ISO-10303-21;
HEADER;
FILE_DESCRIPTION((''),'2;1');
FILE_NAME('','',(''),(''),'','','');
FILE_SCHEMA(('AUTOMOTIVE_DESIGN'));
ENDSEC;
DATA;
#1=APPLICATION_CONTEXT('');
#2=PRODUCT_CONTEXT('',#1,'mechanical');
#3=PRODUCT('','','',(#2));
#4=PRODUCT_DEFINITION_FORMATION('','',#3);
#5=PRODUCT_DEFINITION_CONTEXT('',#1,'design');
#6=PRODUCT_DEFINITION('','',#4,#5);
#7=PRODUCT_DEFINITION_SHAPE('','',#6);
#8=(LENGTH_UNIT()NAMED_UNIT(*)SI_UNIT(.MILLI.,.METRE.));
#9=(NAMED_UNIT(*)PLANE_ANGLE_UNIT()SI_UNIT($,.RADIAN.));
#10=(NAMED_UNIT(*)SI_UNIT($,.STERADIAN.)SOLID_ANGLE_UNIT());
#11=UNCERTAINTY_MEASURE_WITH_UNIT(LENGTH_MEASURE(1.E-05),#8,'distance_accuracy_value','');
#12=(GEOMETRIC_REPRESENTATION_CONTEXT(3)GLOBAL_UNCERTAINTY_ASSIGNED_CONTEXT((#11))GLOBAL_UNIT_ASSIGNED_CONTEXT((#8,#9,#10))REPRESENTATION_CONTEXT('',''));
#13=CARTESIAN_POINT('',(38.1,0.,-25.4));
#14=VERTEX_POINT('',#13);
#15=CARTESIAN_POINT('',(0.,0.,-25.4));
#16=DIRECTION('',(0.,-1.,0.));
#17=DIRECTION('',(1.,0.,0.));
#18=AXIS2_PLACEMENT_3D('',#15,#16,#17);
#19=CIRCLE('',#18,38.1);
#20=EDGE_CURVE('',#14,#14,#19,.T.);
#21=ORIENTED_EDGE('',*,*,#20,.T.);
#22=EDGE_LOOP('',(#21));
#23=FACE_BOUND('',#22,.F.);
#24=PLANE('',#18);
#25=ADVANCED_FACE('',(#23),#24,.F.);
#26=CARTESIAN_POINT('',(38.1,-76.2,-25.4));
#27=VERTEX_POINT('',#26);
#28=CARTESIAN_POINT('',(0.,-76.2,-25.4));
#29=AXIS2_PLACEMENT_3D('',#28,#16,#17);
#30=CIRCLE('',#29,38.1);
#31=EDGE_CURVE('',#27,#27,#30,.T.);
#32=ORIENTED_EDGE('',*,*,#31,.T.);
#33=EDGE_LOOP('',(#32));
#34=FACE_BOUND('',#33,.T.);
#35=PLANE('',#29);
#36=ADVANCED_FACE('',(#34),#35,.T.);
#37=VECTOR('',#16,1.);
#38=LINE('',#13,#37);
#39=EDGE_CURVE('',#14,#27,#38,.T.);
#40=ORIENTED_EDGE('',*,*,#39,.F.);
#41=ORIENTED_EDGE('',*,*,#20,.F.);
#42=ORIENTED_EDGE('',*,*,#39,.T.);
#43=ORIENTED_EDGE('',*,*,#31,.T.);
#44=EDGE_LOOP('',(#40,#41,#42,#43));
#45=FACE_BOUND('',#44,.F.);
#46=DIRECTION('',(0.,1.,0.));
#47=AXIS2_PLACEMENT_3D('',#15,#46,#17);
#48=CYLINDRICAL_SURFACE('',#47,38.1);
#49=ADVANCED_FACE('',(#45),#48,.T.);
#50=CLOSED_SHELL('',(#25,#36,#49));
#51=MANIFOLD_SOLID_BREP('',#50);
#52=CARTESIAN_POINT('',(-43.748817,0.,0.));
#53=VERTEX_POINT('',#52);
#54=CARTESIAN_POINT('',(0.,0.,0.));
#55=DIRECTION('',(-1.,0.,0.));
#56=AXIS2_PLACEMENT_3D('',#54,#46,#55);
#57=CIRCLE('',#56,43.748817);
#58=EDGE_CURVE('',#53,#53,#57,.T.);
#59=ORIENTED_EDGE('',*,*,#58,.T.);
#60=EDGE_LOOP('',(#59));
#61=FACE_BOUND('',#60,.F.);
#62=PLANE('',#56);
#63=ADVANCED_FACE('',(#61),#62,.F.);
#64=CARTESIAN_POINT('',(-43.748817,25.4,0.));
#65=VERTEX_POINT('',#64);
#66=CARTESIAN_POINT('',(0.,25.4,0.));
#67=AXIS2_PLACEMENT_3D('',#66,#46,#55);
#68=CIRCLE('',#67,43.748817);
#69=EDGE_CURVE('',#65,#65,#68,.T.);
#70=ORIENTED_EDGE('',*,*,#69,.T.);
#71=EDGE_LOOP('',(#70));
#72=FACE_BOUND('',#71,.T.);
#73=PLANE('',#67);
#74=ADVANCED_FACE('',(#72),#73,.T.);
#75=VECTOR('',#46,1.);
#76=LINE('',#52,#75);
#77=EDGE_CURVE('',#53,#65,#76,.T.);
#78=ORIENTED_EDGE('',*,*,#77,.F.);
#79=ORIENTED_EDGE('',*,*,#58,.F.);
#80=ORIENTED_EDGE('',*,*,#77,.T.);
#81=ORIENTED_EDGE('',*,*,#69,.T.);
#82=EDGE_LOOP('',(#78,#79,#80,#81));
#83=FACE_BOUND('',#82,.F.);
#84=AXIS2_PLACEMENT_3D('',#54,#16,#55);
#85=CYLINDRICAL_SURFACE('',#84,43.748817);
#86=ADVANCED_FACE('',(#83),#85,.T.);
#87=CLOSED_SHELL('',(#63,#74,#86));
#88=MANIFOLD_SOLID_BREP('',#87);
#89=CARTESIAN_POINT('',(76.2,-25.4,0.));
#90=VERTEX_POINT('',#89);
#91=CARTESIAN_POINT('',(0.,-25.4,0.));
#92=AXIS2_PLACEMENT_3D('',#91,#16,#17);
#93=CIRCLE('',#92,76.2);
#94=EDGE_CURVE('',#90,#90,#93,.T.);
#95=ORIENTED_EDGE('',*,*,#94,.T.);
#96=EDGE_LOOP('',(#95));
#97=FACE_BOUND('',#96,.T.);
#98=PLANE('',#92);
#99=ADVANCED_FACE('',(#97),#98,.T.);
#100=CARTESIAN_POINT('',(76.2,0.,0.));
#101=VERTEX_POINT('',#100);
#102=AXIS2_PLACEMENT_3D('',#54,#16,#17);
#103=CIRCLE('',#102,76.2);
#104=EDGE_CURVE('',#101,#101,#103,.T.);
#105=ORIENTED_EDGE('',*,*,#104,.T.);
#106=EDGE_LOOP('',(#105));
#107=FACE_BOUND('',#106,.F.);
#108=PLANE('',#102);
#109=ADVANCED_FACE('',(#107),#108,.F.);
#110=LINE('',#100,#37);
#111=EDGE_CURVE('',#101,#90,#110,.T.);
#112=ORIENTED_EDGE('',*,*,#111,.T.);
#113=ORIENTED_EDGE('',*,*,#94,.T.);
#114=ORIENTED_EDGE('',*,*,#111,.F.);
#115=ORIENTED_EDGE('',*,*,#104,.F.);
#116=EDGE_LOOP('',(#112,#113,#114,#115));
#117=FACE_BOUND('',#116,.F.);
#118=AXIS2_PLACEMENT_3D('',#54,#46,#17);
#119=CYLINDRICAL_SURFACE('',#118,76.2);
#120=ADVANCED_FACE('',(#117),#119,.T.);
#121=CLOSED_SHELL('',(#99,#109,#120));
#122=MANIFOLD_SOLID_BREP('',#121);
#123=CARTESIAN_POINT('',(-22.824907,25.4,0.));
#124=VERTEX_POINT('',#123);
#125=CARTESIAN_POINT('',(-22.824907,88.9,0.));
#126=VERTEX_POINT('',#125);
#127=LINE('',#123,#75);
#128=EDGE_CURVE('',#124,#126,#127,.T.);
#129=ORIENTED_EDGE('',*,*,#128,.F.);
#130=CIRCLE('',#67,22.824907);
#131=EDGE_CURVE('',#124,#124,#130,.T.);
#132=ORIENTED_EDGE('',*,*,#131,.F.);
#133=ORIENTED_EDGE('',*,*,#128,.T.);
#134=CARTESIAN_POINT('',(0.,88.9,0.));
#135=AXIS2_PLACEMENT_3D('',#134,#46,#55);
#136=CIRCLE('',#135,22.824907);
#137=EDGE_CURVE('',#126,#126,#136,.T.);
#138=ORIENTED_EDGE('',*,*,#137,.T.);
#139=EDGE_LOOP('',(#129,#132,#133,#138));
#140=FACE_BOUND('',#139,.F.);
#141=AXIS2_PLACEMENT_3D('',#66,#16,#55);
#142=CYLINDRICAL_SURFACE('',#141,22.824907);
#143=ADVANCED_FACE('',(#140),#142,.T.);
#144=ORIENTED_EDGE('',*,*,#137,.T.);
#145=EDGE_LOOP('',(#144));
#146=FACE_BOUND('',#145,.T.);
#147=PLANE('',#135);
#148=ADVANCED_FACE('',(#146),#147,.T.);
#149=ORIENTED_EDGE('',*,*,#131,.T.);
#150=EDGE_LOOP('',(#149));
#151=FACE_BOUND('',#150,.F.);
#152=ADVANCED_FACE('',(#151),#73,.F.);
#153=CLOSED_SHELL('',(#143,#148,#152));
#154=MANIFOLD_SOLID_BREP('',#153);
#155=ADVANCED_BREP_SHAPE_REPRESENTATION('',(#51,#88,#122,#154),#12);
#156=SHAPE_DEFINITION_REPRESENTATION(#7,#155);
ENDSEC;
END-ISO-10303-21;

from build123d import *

# Parameters (mm, degrees)
F0_R     = 76.2
F1_DEPTH = 25.4
F2_R     = 38.1
F3_DEPTH = 76.2
F5_R     = 43.7488165657
F6_DEPTH = 25.4
F7_R     = 22.8249074769
F8_DEPTH = 63.5


# Not quite as in the source:
# - the program builds the solid bodies; features that only make, move or delete a surface that nothing else refers to are left out


with BuildPart() as f1:
    # F0 (on Front) → F1 (new body)
    with BuildSketch(Plane.XZ):
        Circle(F0_R)
    extrude(amount=F1_DEPTH)


with BuildPart() as f3:
    # F2 (on Front) → F3 (new body)
    with BuildSketch(Plane.XZ):
        with Locations((0, -25.4)):
            Circle(F2_R)
    extrude(amount=F3_DEPTH)


with BuildPart() as f6:
    # F5 (on face) → F6 (new body)
    with BuildSketch(Plane(origin=(0, 0, 0), x_dir=(-1, 0, 0), z_dir=(0, 1, 0))):
        Circle(F5_R)
    extrude(amount=F6_DEPTH)


with BuildPart() as f8:
    # F7 (on face) → F8 (new body)
    with BuildSketch(Plane(origin=(0, 25.4, 0), x_dir=(-1, 0, 0), z_dir=(0, 1, 0))):
        Circle(F7_R)
    extrude(amount=F8_DEPTH)


solid = Compound([f1.part, f3.part, f6.part, f8.part])
